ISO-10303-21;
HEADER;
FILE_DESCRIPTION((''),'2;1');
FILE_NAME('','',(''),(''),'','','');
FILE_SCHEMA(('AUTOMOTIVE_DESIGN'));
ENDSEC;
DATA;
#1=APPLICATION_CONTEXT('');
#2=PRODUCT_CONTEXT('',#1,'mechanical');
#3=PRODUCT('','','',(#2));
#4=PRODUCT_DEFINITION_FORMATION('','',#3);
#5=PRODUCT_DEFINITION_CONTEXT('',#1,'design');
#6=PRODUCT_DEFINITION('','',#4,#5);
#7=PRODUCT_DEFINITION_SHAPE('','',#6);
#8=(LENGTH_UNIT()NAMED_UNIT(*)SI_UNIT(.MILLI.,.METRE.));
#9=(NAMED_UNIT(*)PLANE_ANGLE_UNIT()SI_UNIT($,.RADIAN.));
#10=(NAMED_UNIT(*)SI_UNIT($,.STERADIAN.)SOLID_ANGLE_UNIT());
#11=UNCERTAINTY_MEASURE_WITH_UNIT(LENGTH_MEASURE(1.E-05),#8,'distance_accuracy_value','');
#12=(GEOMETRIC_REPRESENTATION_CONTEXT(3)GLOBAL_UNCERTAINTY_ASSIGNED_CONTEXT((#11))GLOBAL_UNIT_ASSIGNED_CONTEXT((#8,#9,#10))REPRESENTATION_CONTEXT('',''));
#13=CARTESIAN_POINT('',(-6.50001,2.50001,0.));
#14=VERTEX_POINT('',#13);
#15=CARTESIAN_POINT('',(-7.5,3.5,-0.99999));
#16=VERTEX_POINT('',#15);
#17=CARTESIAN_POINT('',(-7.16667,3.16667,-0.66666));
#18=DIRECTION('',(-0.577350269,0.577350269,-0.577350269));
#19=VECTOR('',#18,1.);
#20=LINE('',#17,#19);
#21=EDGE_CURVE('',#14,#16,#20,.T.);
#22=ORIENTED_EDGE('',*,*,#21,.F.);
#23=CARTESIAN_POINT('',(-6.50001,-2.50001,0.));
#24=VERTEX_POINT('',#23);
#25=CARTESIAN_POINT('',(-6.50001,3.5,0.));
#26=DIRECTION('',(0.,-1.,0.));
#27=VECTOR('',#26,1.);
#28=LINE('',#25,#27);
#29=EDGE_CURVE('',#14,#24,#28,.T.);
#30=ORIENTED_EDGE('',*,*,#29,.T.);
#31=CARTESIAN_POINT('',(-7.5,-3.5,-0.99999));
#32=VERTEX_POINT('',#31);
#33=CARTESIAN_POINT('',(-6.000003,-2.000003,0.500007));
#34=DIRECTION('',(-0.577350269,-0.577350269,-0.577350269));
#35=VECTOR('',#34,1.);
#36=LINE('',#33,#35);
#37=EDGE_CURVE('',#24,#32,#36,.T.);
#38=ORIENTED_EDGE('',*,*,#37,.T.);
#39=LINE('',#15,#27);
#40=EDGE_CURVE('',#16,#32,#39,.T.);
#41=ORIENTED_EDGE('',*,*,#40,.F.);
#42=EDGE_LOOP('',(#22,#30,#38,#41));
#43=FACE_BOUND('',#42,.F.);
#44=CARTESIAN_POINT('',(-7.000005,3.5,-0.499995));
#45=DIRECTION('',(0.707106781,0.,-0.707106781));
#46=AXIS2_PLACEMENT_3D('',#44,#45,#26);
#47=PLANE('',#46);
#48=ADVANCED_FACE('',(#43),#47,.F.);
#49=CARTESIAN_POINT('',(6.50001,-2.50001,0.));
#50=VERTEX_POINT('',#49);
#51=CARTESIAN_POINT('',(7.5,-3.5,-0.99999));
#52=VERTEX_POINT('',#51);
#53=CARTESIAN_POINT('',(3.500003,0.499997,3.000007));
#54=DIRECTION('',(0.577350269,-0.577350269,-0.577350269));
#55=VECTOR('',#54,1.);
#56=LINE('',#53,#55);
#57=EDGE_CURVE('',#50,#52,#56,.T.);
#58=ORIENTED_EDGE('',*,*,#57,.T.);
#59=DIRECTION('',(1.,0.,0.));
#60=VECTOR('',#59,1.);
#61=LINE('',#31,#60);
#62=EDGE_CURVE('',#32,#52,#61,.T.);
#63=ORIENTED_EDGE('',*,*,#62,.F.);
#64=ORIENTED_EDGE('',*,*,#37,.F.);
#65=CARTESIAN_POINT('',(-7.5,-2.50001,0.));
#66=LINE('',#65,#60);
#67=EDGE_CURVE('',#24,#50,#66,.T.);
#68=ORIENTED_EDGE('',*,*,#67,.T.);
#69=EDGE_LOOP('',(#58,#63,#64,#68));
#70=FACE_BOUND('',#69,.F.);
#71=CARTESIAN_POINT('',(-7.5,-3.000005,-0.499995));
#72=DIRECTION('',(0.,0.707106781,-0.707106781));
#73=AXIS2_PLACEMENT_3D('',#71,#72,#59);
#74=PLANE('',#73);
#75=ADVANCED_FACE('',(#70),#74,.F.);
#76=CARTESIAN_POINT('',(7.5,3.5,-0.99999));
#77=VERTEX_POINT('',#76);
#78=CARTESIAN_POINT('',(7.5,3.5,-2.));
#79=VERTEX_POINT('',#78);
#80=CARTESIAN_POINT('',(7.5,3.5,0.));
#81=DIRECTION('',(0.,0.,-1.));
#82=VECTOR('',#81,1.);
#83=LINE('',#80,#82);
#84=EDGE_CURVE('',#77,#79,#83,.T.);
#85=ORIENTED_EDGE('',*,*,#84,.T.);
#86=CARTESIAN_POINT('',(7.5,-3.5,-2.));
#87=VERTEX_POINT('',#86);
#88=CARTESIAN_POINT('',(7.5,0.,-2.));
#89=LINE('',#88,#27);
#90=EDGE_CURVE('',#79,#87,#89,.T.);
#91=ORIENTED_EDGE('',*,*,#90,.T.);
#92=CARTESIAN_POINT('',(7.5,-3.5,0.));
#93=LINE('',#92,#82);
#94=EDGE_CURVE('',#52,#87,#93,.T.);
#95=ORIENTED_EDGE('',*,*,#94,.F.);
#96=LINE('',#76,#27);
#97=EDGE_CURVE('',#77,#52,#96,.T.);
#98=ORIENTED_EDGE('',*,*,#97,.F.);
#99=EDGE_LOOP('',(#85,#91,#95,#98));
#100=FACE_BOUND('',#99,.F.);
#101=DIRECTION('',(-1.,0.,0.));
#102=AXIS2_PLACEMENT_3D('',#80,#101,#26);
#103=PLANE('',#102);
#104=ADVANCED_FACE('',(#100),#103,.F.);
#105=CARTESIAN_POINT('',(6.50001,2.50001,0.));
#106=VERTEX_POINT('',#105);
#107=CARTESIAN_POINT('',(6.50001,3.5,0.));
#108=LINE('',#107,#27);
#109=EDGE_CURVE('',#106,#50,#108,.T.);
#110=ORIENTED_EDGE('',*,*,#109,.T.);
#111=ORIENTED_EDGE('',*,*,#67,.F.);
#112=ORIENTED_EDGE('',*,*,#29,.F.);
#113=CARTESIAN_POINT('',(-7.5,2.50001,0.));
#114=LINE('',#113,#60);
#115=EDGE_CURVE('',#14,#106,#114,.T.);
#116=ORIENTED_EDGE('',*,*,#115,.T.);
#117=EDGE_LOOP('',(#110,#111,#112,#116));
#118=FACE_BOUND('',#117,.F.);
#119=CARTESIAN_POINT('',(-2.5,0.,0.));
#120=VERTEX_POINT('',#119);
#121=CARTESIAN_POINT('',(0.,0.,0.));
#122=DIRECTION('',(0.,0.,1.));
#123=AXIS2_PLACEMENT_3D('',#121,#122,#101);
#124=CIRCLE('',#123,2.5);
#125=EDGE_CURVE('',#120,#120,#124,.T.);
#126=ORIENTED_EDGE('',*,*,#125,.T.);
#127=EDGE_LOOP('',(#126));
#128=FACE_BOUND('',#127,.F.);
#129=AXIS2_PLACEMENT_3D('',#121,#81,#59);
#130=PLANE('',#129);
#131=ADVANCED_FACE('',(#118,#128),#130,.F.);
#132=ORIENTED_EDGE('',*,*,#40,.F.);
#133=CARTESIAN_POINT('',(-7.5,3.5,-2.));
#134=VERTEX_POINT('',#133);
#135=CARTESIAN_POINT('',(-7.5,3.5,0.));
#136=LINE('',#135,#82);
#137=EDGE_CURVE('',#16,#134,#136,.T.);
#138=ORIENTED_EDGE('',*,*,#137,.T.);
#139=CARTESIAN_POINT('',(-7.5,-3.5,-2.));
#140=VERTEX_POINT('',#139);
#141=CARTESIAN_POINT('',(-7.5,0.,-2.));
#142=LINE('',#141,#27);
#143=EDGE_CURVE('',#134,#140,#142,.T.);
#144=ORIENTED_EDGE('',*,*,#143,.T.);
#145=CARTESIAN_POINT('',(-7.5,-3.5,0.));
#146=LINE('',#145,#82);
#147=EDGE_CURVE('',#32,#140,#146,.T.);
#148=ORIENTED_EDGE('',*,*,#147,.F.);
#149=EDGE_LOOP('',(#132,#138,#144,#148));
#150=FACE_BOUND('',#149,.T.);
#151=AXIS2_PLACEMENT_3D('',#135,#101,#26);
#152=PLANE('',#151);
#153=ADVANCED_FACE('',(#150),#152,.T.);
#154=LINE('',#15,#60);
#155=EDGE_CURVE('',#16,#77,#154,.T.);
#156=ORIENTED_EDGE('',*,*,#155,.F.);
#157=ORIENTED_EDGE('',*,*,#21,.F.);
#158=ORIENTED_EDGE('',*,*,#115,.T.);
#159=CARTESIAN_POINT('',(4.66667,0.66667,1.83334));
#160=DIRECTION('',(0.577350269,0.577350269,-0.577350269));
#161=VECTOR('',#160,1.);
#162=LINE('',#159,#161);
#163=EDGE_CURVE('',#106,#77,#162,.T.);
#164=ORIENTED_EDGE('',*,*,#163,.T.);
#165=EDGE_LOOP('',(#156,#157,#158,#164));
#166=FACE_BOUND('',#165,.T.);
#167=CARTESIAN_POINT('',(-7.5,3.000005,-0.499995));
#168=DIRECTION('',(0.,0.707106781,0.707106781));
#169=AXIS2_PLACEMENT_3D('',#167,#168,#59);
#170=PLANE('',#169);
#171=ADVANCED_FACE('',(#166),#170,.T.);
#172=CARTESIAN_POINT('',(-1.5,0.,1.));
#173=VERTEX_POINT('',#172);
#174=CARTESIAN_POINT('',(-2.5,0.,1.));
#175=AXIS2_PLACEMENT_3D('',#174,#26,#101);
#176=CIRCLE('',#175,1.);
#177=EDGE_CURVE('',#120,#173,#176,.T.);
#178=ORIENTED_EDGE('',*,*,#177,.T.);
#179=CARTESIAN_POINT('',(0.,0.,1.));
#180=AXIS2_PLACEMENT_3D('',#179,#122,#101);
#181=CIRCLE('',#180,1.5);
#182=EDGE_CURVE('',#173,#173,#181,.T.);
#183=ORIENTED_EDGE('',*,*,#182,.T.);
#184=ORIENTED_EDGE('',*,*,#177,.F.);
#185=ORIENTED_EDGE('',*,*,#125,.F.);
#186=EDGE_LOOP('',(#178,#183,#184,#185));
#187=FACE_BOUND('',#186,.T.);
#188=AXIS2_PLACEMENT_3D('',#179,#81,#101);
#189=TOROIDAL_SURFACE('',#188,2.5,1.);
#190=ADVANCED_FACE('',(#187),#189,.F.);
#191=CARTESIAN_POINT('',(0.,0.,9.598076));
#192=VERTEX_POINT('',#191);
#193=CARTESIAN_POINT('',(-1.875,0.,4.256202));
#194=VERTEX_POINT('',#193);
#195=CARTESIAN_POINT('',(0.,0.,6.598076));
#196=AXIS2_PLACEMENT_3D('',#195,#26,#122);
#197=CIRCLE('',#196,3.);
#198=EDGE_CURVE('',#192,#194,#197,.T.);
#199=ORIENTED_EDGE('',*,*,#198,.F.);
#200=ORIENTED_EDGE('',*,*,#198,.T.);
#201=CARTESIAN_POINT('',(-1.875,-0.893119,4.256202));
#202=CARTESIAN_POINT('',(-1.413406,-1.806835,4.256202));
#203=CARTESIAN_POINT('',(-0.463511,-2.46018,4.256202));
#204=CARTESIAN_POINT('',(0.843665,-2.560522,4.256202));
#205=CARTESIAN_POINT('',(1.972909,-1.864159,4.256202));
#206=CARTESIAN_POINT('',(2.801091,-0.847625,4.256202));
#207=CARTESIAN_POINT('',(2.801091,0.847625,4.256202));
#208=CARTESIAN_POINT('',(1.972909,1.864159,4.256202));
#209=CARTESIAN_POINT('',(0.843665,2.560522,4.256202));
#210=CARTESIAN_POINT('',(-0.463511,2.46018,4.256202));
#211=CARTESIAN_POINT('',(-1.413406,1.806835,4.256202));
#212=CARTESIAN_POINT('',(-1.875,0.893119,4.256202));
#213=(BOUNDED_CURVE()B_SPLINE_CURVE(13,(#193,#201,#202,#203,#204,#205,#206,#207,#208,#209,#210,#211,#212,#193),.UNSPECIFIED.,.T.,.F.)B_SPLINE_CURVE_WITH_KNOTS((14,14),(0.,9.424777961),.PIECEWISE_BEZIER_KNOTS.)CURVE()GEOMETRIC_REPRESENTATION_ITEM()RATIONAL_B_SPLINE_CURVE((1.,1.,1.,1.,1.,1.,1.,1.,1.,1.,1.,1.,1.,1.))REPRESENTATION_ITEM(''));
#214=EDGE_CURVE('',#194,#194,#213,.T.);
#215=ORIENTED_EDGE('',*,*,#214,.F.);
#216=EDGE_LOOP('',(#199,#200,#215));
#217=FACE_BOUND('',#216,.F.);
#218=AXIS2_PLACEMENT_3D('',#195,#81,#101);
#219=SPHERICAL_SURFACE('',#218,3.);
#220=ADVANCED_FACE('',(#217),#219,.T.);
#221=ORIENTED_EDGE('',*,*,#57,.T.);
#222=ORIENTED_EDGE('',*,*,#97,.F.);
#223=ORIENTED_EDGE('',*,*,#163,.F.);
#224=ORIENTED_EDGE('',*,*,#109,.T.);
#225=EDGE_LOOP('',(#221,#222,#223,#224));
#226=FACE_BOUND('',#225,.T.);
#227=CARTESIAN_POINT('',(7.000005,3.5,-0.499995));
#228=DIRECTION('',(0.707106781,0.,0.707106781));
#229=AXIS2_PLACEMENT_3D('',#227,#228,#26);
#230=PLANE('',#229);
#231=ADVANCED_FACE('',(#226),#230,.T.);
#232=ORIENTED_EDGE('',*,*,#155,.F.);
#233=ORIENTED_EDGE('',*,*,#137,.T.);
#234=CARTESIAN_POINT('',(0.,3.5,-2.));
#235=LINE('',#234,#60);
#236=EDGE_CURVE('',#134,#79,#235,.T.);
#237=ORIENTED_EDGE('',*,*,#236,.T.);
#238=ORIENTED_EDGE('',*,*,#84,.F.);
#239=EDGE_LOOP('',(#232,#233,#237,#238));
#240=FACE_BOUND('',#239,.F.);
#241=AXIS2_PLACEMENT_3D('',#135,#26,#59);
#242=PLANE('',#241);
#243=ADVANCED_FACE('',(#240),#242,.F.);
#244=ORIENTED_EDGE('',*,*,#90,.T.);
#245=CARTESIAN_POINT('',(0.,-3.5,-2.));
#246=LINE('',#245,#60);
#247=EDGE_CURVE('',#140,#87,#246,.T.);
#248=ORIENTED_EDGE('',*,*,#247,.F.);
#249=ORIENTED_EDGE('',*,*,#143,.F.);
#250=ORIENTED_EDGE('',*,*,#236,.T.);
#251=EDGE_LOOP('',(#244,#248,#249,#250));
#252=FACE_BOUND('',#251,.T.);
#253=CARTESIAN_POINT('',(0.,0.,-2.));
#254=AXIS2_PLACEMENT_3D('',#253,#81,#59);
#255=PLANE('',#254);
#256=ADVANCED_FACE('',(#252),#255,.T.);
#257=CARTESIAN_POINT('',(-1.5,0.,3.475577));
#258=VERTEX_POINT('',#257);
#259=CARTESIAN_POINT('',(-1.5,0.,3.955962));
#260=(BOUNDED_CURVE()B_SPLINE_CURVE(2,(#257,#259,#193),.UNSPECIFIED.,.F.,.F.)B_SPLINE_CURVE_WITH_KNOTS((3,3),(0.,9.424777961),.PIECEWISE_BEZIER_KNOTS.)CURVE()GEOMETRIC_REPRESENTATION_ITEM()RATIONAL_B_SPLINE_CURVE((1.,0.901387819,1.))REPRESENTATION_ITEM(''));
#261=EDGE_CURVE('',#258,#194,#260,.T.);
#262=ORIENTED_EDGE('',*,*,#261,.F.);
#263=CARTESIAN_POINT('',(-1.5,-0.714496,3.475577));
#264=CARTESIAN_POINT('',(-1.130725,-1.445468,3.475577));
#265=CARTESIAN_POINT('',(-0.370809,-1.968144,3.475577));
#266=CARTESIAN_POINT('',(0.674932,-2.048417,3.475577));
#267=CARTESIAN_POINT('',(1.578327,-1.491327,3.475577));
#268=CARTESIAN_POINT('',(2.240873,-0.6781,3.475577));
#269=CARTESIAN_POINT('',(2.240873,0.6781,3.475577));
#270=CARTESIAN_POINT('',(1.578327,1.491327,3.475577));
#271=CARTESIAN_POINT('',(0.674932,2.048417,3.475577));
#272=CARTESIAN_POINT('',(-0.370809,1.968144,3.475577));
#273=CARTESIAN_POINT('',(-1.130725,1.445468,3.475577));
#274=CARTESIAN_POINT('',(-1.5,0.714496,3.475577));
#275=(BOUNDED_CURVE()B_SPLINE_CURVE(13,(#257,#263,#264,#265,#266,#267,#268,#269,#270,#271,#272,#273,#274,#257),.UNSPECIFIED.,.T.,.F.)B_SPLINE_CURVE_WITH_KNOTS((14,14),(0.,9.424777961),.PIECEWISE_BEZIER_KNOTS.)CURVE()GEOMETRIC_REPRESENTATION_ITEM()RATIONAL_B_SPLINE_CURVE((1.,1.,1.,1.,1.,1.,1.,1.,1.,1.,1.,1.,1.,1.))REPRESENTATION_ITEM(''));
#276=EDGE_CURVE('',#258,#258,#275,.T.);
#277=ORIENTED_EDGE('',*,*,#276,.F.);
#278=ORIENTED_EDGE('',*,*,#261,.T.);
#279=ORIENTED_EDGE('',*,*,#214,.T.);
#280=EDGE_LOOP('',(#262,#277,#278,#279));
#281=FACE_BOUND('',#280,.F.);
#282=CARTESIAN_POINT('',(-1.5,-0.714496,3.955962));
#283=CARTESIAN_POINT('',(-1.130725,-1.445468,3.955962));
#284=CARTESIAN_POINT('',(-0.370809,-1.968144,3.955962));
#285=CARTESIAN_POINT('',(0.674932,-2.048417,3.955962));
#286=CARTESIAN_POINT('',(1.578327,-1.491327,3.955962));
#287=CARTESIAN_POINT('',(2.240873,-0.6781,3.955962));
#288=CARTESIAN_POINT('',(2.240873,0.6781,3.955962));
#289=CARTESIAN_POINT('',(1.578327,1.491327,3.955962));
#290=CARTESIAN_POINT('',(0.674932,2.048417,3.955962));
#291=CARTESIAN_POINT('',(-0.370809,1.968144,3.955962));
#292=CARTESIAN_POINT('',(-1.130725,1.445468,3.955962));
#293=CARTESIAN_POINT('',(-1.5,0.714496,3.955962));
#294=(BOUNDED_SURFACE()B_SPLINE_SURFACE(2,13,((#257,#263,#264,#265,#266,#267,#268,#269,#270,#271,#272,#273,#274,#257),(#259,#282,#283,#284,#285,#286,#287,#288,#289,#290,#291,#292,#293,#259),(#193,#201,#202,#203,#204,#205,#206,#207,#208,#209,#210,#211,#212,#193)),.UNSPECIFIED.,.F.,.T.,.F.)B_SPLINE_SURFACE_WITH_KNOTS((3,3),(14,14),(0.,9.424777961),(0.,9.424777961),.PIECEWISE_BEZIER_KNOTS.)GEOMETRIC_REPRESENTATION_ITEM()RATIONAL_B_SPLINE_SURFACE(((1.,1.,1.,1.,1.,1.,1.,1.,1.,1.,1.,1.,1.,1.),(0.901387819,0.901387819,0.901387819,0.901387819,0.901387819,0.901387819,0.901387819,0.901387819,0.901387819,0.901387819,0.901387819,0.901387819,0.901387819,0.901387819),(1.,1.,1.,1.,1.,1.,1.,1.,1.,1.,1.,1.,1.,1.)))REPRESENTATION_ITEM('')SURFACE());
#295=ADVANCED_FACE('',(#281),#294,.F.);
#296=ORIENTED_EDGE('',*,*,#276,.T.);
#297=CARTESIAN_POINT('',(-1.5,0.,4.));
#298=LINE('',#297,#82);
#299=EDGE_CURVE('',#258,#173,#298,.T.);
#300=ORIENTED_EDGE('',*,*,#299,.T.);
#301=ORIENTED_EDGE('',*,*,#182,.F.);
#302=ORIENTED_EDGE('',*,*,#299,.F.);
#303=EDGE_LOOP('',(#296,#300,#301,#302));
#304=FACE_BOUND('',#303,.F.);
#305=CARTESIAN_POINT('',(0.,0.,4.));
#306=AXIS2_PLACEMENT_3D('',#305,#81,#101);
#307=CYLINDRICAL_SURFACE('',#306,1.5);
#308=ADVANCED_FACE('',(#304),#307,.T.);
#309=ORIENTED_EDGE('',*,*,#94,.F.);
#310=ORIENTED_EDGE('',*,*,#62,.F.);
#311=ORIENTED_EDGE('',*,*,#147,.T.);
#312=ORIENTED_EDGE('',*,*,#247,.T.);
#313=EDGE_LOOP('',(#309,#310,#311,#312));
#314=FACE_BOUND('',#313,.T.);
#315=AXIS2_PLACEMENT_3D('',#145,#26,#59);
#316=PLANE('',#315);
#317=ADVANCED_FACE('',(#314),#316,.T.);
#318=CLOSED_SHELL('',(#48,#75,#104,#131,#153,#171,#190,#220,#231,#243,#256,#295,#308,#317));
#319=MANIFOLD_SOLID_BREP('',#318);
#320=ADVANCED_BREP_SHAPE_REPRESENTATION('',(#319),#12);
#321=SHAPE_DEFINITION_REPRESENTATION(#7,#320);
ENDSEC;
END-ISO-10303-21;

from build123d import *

# Parameters (mm, degrees)
F2_W     = 15
F2_H     = 7
F2_R     = 1.5
F3_DEPTH = 2.000000095
F4_R     = 1
F5_SIZE  = 0.99999


# Not quite as in the source:
# - a fillet or chamfer is up to 0.001 mm smaller than in the source, because OpenCascade refuses the exact size


with BuildPart() as f1:
    # F0 (on Front) → F1 (revolve)
    with BuildSketch(Plane.XZ):
        with BuildLine():
            Line((-1.5, 4), (-1.5, 0))
            Line((-1.5, 0), (0, 0))
            Line((0, 0), (0, 9.5980762114))
            ThreePointArc((0, 9.5980762114), (-2.8977774789, 7.3745333467), (-1.5, 4))
        make_face()
    revolve(axis=Axis((0, 0, 4.7990381057), (0, 0, 1)))

    # F2 (on face) → F3 (join)
    with BuildSketch(Plane(origin=(0, 0, 0), x_dir=(1, 0, 0), z_dir=(0, 0, -1))):
        Rectangle(F2_W, F2_H)
        Circle(F2_R, mode=Mode.SUBTRACT)
        Circle(F2_R)
    extrude(amount=F3_DEPTH)

    # F4
    f4_edges = [f1.edges().sort_by_distance(p)[0] for p in [
        (1.5, 0, 0),
        (1.5, 0, 4),
    ]]
    fillet(f4_edges, radius=F4_R)

    # F5 (size 1 in the source; OpenCascade refuses exactly that, so slightly less here)
    f5_edges = [f1.edges().sort_by_distance(p)[0] for p in [
        (2.5, 0, 0),
        (7.5, 0, 0),
        (0, 3.5, 0),
        (0, -3.5, 0),
        (-7.5, 0, 0),
    ]]
    chamfer(f5_edges, length=F5_SIZE)


solid = f1.part
